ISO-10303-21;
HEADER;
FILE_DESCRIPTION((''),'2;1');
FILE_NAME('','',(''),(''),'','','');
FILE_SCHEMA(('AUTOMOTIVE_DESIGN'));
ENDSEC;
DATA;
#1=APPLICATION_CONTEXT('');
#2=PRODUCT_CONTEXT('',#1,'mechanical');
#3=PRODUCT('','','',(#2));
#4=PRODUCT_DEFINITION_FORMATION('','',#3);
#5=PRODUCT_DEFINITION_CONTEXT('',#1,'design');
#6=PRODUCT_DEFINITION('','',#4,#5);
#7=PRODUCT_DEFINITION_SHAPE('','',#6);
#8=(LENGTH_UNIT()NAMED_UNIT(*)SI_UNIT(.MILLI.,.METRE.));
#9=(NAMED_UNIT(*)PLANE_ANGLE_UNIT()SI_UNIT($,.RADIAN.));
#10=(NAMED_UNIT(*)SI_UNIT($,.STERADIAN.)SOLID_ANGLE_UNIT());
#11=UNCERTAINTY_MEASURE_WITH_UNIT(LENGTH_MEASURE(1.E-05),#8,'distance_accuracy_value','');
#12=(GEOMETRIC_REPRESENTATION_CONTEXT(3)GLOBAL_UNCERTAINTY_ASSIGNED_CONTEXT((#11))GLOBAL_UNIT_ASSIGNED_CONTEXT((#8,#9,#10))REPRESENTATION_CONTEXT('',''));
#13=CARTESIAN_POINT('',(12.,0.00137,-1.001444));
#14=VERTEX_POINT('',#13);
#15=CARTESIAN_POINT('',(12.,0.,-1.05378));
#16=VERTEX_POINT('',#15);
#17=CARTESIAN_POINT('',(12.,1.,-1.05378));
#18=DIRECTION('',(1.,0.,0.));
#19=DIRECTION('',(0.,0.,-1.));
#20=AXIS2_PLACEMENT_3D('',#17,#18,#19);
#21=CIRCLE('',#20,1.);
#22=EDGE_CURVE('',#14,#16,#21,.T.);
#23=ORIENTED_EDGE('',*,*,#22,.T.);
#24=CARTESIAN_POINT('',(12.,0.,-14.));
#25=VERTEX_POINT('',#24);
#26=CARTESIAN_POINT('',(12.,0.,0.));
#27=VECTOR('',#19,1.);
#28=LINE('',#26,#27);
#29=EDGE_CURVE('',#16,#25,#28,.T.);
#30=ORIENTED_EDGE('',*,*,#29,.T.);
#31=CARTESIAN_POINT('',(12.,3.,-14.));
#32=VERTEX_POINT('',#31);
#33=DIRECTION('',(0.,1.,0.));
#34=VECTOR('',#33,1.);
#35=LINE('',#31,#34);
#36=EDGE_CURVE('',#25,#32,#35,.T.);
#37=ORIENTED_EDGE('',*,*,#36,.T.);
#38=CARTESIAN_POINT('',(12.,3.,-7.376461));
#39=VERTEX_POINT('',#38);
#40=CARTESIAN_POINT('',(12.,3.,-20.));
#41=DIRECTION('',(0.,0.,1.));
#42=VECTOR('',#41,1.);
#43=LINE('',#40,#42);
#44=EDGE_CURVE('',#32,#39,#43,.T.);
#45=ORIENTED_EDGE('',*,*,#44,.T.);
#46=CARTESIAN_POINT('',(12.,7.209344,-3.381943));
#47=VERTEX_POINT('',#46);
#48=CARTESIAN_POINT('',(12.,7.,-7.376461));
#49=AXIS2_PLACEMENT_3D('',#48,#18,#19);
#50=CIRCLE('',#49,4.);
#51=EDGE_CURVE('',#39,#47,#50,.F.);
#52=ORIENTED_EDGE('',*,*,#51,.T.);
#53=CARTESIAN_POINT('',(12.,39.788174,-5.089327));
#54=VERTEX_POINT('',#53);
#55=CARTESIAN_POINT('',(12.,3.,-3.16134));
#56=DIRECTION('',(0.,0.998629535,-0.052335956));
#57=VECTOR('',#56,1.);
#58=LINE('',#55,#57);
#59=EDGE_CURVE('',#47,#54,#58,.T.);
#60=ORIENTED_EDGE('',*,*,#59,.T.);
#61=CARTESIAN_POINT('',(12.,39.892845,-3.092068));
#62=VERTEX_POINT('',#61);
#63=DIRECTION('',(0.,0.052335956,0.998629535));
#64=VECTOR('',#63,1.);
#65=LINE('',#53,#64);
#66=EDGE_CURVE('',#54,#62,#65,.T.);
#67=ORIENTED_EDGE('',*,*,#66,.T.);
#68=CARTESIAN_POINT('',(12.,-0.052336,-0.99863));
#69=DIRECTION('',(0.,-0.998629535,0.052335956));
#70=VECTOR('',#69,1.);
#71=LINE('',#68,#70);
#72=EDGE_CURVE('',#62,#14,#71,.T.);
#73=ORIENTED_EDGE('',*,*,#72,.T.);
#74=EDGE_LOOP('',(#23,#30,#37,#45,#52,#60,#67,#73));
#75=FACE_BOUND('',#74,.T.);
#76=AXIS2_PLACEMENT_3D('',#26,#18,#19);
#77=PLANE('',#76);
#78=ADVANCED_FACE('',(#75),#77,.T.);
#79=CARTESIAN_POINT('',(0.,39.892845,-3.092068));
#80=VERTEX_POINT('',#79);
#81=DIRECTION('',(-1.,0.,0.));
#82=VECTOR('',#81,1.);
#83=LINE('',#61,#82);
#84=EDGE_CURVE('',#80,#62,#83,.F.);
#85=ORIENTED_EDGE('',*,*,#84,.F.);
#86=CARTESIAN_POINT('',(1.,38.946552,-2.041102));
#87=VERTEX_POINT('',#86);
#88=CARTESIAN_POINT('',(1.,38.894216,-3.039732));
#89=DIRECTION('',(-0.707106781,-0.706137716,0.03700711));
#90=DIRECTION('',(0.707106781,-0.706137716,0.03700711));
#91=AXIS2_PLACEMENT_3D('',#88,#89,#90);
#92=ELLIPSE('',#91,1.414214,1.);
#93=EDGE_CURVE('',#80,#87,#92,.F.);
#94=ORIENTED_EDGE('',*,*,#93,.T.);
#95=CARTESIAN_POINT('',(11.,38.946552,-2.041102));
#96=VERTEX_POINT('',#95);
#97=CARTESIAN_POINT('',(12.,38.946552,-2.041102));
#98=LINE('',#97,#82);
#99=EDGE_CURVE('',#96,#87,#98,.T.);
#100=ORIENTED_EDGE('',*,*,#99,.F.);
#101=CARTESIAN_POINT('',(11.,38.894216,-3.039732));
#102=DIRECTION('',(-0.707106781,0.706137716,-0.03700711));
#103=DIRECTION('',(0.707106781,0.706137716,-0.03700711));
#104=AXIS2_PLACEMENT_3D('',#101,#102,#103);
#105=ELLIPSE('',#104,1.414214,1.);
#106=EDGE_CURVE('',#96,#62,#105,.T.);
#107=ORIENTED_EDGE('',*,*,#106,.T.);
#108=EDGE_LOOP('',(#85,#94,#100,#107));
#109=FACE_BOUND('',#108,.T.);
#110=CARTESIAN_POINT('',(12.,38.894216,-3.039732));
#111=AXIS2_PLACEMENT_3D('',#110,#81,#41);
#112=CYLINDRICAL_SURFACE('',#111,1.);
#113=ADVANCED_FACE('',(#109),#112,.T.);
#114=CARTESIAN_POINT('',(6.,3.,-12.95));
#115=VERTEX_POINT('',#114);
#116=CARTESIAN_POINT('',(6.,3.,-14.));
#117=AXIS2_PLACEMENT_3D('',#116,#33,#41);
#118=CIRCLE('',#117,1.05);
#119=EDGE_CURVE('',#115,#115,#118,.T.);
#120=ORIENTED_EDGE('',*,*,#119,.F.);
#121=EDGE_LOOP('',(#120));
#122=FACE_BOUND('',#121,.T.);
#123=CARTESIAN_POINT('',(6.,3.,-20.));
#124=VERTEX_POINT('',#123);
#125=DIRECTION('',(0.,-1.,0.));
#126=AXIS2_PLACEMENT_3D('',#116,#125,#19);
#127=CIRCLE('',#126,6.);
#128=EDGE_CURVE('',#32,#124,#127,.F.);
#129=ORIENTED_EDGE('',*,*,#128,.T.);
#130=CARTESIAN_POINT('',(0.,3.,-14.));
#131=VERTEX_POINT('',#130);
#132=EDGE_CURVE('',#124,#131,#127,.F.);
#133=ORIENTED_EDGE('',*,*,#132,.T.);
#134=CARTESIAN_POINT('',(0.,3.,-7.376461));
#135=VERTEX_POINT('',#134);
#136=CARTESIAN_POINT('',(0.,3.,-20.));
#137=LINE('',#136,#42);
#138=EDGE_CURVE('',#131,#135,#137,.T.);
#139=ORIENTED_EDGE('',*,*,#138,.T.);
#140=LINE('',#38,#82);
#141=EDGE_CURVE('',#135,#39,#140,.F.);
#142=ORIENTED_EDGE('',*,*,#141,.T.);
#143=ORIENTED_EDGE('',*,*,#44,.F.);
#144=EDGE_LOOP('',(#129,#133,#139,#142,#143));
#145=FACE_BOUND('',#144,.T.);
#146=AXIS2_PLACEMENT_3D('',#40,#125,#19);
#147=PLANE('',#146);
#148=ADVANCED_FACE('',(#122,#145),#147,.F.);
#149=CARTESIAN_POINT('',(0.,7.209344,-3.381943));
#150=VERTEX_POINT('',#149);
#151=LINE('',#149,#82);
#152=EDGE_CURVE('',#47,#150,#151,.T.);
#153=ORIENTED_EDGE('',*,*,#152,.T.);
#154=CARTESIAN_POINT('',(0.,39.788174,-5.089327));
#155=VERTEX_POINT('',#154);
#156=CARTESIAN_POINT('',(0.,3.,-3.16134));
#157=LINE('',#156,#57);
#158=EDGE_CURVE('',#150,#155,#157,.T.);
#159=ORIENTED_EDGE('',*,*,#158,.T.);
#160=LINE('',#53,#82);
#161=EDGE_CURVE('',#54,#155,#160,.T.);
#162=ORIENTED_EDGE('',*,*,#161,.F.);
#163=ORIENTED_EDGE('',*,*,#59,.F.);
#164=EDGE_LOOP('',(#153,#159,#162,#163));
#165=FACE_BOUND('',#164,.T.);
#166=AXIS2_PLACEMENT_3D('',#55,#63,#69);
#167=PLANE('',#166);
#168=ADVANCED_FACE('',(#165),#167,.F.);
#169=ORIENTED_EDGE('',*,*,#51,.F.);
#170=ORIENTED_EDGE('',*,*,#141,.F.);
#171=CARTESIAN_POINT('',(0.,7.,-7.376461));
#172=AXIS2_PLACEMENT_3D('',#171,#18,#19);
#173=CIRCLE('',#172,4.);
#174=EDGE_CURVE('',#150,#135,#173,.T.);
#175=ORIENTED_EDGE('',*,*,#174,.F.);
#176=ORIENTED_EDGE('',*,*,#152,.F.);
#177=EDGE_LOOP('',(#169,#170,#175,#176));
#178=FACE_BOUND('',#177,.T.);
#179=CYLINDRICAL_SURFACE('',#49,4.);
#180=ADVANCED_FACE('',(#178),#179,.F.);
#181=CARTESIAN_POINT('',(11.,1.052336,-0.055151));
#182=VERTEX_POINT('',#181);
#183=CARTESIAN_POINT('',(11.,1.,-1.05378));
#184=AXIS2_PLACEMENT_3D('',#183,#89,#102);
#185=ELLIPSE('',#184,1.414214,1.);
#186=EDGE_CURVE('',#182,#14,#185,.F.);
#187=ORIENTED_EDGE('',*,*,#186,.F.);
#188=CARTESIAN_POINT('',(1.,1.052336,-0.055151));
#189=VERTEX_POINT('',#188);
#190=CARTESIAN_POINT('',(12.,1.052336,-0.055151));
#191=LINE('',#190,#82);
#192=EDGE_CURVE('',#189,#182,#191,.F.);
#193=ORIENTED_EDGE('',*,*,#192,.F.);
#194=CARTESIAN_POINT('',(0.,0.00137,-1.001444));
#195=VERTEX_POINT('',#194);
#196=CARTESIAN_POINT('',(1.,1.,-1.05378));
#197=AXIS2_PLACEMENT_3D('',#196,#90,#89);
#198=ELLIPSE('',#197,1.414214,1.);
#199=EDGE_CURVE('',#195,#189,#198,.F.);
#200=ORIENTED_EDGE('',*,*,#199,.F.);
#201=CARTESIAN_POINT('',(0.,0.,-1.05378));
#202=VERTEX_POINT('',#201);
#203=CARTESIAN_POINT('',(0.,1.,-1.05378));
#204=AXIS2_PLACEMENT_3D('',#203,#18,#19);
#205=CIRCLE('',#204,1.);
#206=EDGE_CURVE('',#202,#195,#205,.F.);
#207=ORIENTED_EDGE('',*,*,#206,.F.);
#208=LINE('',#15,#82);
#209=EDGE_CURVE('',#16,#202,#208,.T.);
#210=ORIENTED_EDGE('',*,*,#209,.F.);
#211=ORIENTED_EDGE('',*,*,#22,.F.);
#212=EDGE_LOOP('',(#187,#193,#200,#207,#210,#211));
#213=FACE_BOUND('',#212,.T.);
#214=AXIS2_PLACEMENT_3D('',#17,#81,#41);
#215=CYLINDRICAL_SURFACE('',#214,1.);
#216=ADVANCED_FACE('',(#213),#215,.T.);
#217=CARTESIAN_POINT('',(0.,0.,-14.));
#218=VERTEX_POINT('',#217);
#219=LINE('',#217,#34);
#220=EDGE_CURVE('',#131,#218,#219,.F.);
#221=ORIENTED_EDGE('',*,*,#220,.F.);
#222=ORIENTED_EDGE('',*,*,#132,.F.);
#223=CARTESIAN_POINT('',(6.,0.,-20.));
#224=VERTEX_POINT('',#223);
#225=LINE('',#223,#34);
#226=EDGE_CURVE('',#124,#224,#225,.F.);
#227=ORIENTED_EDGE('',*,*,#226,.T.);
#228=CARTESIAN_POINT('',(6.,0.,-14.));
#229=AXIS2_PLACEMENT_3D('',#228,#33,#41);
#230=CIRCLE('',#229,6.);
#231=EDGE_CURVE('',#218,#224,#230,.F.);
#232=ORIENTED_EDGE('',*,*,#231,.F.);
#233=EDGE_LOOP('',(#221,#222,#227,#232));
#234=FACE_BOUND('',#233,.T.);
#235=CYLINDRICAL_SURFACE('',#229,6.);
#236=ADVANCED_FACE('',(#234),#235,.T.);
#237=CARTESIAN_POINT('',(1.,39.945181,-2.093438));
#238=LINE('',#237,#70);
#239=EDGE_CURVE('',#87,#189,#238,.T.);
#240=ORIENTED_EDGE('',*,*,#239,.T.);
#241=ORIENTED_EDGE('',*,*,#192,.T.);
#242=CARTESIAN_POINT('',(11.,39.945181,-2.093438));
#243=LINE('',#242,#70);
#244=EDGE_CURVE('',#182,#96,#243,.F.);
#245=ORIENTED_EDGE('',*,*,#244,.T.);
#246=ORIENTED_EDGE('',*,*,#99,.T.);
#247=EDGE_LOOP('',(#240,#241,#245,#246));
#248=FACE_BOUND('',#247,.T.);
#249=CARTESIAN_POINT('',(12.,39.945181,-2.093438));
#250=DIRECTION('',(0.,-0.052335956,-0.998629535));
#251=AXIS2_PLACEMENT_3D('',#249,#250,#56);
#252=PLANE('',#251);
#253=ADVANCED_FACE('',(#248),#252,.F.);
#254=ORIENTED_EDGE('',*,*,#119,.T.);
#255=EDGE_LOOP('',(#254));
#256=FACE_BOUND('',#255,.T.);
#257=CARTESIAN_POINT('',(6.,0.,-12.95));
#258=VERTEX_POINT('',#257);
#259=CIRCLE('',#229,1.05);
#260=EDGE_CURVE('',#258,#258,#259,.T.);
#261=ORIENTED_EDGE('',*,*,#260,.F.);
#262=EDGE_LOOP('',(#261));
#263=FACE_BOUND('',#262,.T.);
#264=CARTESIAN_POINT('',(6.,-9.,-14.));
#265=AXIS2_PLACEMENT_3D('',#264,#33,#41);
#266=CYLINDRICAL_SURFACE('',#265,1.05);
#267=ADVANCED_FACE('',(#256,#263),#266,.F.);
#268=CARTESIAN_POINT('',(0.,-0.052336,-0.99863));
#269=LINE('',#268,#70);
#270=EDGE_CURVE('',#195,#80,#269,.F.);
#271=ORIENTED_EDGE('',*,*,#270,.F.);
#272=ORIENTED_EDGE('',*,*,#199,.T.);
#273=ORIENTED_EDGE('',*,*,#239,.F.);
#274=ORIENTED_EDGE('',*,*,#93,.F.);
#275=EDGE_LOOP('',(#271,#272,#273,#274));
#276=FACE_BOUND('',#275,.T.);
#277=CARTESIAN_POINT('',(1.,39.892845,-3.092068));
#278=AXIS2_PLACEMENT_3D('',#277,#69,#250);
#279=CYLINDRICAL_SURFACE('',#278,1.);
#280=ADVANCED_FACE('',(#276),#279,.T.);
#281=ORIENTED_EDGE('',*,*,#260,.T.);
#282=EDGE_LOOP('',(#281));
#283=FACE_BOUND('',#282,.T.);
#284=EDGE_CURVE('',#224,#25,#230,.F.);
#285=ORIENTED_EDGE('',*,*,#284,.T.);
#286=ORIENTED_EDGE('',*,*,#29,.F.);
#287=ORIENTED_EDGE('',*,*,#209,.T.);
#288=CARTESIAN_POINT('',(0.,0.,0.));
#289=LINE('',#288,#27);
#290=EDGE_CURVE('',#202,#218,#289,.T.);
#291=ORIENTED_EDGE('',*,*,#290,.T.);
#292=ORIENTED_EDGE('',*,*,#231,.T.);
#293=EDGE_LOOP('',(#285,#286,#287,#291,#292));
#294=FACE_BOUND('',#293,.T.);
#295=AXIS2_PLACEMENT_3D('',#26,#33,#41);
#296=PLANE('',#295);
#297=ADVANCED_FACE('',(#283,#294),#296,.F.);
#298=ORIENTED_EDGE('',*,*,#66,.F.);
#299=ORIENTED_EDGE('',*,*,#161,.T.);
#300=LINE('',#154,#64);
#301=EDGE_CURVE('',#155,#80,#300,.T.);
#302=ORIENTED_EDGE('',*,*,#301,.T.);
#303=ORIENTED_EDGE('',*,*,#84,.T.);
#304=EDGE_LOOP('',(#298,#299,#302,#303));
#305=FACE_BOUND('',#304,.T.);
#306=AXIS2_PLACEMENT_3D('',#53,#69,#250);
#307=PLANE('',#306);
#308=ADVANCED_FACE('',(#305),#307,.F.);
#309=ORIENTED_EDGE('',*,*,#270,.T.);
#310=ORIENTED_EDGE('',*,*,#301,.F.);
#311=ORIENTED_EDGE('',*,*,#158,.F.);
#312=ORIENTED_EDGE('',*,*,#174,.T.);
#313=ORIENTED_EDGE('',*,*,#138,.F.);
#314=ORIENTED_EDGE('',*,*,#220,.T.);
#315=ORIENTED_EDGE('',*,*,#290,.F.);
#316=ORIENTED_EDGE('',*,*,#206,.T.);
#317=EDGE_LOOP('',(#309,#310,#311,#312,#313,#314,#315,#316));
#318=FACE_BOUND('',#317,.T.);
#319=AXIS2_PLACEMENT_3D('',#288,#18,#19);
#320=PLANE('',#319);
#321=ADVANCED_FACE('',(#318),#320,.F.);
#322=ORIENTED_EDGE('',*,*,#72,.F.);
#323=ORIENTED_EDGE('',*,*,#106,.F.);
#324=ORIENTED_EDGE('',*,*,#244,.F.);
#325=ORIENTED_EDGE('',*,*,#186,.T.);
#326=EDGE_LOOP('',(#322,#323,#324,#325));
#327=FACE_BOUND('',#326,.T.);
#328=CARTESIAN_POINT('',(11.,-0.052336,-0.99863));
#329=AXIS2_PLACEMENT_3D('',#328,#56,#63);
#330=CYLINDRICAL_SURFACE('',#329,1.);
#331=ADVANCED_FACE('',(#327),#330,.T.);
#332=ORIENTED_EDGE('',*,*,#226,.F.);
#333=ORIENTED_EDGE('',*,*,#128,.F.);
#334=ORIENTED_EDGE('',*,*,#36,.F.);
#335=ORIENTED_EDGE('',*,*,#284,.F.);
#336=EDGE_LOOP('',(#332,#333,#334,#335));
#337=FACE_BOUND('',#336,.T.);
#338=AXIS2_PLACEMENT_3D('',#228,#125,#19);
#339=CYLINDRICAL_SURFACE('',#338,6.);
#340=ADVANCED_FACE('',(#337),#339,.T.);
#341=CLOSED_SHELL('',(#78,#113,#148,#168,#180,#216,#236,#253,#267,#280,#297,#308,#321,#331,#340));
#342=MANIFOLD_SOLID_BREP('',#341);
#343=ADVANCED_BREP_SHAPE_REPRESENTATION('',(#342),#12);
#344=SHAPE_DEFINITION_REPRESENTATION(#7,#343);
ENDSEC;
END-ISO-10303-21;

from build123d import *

# Parameters (mm, degrees)
EXTRUDE_1_DEPTH     = 12
SKETCH_2_R          = 1.05
CUT_EXTRUDE_1_DEPTH = 12
FILLET_1_R          = 1
FILLET_2_R          = 6
FILLET_3_R          = 4


with BuildPart() as part:
    # 草图1 → 凸台-拉伸1 (new body)
    with BuildSketch(Plane(origin=(0, 0, 0), x_dir=(0, 0, -1), z_dir=(1, 0, 0))):
        Polygon((2.09343825, 39.94518139), (0, 0), (20, 0), (20, 3), (3.161340376, 3), (5.089326854, 39.788173521), align=None)
    extrude(amount=EXTRUDE_1_DEPTH)

    # 草图2 → 切除-拉伸1 (cut)
    with BuildSketch(Plane(origin=(0, 3, 0), x_dir=(1, 0, 0), z_dir=(0, 1, 0))):
        with Locations(Location((6, 14, 0), (0, 0, 270))):
            Circle(SKETCH_2_R)
    extrude(amount=-CUT_EXTRUDE_1_DEPTH, mode=Mode.SUBTRACT)

    # 圆角1
    fillet_1_edges = [part.edges().sort_by_distance(p)[0] for p in [
        (6, 0, 0),
        (6, 39.94518139, -2.09343825),
        (0, 19.972590695, -1.046719125),
        (12, 19.972590695, -1.046719125),
    ]]
    fillet(fillet_1_edges, radius=FILLET_1_R)

    # 圆角2
    fillet_2_edges = [part.edges().sort_by_distance(p)[0] for p in [
        (0, 1.5, -20),
        (12, 1.5, -20),
    ]]
    fillet(fillet_2_edges, radius=FILLET_2_R - 0.0001)  # a hair under: the kernel refuses the full size

    # 圆角3
    fillet_3_edges = [part.edges().sort_by_distance(p)[0] for p in [
        (6, 3, -3.161340376),
    ]]
    fillet(fillet_3_edges, radius=FILLET_3_R)


solid = part.part
